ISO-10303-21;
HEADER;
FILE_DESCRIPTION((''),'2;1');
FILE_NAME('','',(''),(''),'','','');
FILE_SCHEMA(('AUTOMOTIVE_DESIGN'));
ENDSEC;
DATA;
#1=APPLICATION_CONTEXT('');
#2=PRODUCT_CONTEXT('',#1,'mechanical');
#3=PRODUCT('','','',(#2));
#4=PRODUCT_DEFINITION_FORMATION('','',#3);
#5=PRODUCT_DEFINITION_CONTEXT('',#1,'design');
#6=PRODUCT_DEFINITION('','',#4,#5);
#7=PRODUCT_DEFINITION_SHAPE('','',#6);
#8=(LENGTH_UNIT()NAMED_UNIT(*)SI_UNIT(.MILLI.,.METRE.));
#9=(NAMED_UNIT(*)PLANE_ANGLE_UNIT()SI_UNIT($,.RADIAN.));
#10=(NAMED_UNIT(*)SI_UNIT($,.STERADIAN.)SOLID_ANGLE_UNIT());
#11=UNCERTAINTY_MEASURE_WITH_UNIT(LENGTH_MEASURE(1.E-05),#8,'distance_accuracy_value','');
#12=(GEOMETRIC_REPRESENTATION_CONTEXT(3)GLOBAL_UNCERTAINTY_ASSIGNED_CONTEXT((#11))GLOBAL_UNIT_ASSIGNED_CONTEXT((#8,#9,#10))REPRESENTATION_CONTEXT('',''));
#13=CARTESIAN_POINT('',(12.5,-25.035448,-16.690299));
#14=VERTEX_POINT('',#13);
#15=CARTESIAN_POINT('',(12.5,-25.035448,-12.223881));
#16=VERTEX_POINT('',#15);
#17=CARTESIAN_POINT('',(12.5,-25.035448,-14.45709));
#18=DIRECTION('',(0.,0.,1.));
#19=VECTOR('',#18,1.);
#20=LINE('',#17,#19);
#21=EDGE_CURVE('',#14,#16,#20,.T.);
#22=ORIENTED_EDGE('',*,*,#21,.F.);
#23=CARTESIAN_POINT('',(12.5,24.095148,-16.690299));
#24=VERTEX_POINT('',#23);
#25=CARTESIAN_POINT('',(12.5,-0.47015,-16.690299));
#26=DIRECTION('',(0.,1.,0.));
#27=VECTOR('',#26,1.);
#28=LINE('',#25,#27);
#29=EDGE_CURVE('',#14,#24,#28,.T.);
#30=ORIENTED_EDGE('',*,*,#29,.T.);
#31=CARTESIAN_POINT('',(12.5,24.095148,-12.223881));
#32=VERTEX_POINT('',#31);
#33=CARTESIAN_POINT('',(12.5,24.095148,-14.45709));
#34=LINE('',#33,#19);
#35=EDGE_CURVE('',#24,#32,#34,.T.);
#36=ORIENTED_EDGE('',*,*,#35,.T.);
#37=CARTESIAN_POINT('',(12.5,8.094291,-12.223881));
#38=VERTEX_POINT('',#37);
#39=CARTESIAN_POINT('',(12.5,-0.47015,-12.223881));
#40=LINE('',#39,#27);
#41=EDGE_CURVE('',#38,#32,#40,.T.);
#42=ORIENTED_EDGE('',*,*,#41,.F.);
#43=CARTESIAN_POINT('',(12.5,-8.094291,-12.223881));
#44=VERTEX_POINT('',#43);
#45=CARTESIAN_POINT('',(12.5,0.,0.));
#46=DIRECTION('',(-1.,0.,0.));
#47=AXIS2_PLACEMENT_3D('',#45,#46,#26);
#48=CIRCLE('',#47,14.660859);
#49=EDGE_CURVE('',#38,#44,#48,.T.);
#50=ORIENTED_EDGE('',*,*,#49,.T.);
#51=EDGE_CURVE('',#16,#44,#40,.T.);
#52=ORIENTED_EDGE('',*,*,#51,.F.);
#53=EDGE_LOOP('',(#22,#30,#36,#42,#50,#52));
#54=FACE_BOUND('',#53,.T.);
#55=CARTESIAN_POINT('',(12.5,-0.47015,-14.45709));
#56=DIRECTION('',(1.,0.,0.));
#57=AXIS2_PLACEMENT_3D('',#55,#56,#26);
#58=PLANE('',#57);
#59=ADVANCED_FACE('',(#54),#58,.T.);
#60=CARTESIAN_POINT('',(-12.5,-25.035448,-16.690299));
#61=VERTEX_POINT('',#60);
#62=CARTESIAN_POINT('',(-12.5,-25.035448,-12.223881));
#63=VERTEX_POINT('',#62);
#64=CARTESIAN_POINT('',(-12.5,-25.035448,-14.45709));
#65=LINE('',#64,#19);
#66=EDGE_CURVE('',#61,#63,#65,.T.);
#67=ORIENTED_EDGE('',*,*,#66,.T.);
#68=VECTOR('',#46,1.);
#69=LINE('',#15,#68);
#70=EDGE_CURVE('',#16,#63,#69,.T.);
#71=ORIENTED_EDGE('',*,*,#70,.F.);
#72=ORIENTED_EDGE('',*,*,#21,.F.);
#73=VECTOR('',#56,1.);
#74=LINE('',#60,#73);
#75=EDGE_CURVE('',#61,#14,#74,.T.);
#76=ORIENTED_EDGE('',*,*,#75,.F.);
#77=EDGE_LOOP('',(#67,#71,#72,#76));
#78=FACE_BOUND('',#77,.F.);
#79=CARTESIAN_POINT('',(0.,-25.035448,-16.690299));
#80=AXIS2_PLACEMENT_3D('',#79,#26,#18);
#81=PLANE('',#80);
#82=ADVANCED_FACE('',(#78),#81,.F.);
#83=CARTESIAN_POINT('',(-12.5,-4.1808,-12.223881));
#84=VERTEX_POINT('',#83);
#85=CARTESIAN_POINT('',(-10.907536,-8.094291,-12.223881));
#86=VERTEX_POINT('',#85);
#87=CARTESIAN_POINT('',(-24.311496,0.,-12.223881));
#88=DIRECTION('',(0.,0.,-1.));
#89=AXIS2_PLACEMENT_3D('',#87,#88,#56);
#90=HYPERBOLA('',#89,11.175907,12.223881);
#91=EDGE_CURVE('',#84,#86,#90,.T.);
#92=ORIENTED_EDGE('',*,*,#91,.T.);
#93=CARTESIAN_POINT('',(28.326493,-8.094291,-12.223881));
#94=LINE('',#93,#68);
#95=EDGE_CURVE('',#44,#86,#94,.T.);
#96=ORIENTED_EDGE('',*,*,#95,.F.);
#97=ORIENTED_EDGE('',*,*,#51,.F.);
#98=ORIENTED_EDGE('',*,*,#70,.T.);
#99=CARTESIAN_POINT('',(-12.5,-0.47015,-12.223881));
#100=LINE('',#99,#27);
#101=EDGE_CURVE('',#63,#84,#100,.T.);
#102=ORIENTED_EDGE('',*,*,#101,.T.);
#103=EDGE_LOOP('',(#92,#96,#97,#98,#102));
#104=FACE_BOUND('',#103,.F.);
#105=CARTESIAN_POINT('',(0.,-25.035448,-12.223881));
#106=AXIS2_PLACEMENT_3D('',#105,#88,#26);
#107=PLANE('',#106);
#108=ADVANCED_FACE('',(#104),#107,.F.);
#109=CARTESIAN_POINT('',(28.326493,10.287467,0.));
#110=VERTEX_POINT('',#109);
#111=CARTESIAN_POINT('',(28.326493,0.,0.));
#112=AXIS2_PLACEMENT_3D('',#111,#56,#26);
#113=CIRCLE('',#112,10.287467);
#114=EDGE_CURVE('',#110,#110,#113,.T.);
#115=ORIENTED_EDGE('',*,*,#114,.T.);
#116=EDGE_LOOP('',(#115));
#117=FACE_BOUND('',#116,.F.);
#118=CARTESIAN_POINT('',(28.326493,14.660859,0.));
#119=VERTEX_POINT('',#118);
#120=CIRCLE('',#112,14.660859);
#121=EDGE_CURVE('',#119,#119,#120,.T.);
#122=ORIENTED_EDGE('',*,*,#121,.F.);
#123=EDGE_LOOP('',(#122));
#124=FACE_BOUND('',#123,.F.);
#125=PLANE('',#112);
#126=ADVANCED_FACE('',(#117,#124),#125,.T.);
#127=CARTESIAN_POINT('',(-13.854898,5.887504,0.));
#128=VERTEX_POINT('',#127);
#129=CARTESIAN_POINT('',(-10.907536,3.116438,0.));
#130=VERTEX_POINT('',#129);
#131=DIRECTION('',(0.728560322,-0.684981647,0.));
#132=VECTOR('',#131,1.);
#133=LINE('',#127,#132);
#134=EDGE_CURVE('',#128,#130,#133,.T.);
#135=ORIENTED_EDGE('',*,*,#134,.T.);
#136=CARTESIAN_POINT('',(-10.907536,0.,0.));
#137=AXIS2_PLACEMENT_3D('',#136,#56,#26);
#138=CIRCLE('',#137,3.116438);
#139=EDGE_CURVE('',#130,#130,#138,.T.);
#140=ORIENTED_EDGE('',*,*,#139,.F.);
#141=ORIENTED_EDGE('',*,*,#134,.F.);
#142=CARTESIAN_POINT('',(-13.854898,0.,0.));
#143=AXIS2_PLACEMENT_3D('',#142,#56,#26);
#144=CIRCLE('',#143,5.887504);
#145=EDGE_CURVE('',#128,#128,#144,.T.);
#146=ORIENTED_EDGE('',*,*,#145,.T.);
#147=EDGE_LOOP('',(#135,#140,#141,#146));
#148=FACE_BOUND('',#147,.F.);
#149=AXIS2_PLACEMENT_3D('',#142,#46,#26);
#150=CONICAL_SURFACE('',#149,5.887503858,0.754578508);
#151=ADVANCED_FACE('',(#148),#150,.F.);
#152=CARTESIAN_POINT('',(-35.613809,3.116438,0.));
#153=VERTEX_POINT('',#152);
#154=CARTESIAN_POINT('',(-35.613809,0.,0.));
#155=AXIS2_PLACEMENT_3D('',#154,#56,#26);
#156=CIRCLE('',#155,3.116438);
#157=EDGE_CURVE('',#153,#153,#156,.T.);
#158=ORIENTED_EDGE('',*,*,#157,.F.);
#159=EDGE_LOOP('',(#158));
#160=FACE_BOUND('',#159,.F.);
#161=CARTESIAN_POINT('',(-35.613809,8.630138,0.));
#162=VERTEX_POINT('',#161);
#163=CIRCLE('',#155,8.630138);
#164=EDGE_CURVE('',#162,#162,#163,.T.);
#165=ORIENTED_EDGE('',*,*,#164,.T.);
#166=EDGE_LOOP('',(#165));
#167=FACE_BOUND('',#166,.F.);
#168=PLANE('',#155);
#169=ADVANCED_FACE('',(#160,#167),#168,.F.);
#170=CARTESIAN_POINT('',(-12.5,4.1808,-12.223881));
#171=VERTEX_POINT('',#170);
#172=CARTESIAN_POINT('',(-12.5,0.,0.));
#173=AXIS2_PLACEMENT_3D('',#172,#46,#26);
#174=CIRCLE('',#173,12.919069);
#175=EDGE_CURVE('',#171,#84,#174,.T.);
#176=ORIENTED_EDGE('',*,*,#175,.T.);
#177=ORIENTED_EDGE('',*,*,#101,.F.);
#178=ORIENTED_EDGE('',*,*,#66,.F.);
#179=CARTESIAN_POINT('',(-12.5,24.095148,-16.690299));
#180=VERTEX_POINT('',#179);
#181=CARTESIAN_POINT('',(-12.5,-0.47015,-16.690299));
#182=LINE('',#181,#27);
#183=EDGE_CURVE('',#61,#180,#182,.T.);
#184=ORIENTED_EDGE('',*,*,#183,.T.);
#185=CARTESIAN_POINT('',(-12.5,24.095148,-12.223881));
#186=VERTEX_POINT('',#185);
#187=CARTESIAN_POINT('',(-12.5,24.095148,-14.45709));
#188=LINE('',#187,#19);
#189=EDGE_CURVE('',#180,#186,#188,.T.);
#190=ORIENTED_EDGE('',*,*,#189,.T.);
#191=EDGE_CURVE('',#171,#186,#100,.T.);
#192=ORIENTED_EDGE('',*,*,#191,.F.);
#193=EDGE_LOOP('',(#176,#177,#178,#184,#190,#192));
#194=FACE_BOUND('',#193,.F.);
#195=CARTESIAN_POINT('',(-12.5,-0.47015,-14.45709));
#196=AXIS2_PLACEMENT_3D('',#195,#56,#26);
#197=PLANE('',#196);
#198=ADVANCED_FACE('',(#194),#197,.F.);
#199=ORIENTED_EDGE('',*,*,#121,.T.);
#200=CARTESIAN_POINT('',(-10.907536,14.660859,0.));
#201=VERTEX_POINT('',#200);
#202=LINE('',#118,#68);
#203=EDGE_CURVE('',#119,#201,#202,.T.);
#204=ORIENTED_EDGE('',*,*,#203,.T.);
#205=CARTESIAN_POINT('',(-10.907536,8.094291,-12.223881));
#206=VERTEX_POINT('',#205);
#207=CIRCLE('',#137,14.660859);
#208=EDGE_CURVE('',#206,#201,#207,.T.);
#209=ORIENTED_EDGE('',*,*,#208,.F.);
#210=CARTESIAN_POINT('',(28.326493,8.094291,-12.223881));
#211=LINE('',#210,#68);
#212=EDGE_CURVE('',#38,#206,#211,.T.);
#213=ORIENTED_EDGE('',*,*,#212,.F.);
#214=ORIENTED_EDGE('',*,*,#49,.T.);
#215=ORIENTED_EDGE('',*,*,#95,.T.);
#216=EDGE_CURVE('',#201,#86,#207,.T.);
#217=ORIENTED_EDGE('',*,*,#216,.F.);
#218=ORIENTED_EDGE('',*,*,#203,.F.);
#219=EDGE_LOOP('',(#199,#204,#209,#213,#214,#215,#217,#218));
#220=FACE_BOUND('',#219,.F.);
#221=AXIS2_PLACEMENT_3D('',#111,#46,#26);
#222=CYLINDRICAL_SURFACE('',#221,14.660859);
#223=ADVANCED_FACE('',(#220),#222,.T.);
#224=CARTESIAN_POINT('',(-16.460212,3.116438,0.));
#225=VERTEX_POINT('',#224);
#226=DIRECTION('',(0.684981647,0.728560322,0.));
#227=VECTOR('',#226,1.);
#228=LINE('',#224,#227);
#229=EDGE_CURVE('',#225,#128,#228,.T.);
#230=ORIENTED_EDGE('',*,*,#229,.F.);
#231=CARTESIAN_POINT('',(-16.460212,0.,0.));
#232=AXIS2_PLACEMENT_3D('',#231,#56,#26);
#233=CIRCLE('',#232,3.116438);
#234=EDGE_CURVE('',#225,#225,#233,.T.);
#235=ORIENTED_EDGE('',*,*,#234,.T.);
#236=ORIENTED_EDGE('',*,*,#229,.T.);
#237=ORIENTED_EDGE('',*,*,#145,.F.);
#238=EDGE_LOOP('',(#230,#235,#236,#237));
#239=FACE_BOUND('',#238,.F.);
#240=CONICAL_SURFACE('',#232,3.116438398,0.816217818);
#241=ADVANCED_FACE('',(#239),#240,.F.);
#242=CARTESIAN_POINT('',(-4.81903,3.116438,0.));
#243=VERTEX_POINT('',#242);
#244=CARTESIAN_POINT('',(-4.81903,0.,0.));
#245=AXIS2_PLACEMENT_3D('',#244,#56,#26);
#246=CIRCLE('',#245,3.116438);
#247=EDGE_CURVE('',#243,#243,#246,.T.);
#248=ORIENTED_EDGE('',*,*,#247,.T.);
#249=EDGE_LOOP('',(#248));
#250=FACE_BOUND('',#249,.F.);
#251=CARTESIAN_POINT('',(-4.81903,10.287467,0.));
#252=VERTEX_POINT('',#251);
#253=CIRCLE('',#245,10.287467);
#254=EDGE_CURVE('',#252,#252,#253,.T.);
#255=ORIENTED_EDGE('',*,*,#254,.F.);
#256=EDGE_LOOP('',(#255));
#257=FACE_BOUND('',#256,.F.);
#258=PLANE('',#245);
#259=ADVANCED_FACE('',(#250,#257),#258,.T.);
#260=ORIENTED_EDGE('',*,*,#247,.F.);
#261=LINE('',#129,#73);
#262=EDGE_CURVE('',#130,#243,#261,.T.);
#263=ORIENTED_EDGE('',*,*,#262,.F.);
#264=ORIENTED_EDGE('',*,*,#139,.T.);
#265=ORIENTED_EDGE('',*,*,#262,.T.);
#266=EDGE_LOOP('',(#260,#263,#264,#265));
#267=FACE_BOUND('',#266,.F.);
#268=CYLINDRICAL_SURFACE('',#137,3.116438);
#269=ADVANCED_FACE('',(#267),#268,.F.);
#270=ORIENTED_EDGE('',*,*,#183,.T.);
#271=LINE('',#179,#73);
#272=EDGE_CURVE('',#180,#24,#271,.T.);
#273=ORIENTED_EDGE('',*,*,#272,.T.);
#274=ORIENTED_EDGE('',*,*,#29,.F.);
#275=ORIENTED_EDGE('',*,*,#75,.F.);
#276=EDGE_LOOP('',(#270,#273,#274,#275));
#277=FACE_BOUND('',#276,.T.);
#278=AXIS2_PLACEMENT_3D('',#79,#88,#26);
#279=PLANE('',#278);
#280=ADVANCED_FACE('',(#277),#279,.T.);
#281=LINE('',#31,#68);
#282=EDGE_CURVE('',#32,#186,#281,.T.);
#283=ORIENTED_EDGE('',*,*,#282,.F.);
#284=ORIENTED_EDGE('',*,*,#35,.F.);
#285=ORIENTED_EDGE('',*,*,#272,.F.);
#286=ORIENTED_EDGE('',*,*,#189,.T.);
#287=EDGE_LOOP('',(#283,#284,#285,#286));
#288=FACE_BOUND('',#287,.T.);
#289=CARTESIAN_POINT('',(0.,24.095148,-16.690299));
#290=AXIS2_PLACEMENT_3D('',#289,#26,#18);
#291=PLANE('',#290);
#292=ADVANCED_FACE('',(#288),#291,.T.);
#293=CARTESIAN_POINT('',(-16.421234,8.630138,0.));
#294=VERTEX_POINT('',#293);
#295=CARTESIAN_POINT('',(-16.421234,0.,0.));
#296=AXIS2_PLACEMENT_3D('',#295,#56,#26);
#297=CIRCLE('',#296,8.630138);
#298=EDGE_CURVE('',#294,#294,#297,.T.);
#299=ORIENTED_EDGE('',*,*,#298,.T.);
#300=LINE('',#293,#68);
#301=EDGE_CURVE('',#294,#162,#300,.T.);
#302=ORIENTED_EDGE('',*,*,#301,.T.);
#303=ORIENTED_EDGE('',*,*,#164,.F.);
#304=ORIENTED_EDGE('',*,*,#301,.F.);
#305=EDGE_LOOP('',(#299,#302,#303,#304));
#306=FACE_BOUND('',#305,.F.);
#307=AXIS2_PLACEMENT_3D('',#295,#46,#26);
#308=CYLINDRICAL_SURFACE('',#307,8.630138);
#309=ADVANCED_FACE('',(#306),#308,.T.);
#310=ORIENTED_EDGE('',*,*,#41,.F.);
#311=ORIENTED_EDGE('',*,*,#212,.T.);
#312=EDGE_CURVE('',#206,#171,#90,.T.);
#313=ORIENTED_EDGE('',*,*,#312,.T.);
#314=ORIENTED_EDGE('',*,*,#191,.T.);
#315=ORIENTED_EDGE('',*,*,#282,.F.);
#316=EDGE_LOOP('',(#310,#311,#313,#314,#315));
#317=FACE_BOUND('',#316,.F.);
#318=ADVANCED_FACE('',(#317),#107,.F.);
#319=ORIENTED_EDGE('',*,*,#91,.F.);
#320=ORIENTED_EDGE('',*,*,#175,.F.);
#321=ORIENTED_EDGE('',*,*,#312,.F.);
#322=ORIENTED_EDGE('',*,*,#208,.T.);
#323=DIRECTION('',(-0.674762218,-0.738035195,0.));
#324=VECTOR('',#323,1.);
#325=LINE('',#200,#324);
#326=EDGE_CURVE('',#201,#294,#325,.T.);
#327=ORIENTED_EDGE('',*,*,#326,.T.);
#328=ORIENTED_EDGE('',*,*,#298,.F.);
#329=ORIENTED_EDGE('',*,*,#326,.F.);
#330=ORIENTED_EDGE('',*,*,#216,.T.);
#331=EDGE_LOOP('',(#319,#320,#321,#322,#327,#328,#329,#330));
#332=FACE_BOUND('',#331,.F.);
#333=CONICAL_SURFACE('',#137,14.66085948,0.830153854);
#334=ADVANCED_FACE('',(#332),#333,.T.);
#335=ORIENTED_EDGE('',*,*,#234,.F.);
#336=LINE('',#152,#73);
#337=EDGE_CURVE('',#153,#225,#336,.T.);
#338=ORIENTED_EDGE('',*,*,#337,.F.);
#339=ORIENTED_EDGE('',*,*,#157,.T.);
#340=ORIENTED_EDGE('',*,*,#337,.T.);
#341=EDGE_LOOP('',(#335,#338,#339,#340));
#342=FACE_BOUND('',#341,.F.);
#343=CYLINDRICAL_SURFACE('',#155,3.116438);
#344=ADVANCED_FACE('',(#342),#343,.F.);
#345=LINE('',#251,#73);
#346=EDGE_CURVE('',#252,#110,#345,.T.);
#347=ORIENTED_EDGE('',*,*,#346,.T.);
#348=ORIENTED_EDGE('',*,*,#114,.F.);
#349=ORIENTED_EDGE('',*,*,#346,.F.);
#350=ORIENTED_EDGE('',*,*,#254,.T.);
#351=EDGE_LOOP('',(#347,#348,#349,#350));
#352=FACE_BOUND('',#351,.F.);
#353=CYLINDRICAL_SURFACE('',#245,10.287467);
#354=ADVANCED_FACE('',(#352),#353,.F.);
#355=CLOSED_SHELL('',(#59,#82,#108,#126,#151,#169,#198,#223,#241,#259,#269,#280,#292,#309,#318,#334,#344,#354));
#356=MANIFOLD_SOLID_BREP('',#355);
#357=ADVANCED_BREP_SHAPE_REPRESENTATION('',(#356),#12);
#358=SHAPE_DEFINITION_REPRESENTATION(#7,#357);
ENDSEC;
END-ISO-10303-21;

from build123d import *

# Parameters (mm, degrees)
F2_W     = 49.1305962205
F2_H     = 4.4664181769
F3_DEPTH = 12.5


# Not quite as in the source:
# - a feature names something its author has since deleted; it is built from what else it names


with BuildPart() as f1:
    # F0 (on Top) → F1 (revolve)
    with BuildSketch(Plane.XY):
        Polygon((-35.6138087809, 8.6301378906), (-35.6138087809, 3.1164383981), (-16.4602123841, 3.1164383981), (-13.8548975913, 5.887503858), (-10.9075363725, 3.1164383981), (-4.8190304078, 3.1164383981), (-4.8190304078, 10.2874673903), (28.3264927566, 10.2874673903), (28.3264927566, 14.6608594805), (-10.9075363725, 14.6608594805), (-16.4212342352, 8.6301378906), align=None)
    revolve(axis=Axis((-1.5279836953, 0, 0), (1, 0, 0)))

    # F2 (on Right) → F3 (join, symmetric)
    with BuildSketch(Plane.YZ):
        with Locations((-0.4701502621, -14.4570898265)):
            Rectangle(F2_W, F2_H)
    extrude(amount=F3_DEPTH, both=True)


solid = f1.part
